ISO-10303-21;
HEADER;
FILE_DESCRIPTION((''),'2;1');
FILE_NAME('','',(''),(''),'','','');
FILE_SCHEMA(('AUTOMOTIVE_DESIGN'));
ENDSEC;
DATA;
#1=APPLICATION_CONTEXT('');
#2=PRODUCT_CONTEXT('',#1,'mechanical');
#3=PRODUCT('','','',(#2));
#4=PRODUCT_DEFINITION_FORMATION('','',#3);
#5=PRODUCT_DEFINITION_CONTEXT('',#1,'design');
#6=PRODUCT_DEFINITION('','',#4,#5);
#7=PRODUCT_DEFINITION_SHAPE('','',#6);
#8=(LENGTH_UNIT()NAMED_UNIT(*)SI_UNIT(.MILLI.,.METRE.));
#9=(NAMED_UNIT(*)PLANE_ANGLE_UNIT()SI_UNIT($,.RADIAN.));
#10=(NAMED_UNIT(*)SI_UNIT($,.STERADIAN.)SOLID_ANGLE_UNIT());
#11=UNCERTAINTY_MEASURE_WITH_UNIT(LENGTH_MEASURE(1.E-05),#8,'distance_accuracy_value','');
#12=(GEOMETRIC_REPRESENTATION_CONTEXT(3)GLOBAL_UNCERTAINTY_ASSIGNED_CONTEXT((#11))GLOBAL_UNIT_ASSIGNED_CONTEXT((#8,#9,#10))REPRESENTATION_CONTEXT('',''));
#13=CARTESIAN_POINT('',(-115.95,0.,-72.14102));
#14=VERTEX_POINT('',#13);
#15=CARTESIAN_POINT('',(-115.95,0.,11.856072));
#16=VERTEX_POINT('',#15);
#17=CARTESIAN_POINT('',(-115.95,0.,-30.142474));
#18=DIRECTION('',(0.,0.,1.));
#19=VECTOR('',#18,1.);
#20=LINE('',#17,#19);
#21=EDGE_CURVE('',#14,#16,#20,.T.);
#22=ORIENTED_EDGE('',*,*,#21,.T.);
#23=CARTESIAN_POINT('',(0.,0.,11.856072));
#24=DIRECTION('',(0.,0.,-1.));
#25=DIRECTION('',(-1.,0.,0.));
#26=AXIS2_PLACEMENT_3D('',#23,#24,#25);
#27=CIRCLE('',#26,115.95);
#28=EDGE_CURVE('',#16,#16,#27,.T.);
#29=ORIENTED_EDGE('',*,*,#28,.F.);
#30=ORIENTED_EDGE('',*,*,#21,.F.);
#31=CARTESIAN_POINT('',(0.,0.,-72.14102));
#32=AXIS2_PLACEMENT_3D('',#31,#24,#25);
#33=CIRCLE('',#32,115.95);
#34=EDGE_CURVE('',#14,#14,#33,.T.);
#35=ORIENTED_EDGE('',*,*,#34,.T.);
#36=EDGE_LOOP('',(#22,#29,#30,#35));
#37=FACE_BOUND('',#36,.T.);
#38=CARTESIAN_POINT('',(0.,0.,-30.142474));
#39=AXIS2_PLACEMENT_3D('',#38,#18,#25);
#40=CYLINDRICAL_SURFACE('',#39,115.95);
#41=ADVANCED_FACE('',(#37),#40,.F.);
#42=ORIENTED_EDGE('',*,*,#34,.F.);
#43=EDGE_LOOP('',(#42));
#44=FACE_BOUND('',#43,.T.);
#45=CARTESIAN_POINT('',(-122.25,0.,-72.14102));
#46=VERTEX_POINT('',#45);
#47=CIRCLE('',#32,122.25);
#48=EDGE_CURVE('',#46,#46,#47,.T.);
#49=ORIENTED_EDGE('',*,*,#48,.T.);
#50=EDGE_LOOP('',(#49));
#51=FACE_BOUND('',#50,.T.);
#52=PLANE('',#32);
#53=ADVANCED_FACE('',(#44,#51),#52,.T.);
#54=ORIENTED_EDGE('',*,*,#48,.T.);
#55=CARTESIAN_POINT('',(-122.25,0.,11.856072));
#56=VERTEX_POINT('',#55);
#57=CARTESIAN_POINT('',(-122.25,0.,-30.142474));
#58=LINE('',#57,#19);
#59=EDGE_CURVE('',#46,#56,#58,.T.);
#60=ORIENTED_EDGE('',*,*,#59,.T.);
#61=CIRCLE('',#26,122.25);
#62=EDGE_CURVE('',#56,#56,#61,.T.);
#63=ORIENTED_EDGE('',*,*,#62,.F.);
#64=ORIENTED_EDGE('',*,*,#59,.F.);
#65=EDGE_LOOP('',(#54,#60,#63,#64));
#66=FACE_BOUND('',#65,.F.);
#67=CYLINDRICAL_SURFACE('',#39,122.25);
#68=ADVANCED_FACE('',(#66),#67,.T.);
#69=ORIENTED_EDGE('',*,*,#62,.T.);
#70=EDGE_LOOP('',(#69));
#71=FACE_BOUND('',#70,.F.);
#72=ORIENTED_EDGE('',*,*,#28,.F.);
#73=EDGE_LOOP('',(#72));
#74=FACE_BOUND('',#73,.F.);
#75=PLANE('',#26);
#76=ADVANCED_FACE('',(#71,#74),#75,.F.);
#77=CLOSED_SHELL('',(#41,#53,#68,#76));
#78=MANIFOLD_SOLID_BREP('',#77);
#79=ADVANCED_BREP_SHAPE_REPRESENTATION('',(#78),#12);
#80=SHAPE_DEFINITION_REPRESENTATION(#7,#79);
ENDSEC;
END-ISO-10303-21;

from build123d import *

# Parameters (mm, degrees)
F0_W = 6.3
F0_H = 83.9970919721


# Not quite as in the source:
# - a feature names something its author has since deleted; it is built from what else it names


with BuildPart() as f1:
    # F0 (on Front) → F1 (revolve)
    with BuildSketch(Plane.XZ):
        with Locations((-119.1, -30.1424739006)):
            Rectangle(F0_W, F0_H)
    revolve(axis=Axis((0, 0, -33.1439279145), (0, 0, -1)))


solid = f1.part
